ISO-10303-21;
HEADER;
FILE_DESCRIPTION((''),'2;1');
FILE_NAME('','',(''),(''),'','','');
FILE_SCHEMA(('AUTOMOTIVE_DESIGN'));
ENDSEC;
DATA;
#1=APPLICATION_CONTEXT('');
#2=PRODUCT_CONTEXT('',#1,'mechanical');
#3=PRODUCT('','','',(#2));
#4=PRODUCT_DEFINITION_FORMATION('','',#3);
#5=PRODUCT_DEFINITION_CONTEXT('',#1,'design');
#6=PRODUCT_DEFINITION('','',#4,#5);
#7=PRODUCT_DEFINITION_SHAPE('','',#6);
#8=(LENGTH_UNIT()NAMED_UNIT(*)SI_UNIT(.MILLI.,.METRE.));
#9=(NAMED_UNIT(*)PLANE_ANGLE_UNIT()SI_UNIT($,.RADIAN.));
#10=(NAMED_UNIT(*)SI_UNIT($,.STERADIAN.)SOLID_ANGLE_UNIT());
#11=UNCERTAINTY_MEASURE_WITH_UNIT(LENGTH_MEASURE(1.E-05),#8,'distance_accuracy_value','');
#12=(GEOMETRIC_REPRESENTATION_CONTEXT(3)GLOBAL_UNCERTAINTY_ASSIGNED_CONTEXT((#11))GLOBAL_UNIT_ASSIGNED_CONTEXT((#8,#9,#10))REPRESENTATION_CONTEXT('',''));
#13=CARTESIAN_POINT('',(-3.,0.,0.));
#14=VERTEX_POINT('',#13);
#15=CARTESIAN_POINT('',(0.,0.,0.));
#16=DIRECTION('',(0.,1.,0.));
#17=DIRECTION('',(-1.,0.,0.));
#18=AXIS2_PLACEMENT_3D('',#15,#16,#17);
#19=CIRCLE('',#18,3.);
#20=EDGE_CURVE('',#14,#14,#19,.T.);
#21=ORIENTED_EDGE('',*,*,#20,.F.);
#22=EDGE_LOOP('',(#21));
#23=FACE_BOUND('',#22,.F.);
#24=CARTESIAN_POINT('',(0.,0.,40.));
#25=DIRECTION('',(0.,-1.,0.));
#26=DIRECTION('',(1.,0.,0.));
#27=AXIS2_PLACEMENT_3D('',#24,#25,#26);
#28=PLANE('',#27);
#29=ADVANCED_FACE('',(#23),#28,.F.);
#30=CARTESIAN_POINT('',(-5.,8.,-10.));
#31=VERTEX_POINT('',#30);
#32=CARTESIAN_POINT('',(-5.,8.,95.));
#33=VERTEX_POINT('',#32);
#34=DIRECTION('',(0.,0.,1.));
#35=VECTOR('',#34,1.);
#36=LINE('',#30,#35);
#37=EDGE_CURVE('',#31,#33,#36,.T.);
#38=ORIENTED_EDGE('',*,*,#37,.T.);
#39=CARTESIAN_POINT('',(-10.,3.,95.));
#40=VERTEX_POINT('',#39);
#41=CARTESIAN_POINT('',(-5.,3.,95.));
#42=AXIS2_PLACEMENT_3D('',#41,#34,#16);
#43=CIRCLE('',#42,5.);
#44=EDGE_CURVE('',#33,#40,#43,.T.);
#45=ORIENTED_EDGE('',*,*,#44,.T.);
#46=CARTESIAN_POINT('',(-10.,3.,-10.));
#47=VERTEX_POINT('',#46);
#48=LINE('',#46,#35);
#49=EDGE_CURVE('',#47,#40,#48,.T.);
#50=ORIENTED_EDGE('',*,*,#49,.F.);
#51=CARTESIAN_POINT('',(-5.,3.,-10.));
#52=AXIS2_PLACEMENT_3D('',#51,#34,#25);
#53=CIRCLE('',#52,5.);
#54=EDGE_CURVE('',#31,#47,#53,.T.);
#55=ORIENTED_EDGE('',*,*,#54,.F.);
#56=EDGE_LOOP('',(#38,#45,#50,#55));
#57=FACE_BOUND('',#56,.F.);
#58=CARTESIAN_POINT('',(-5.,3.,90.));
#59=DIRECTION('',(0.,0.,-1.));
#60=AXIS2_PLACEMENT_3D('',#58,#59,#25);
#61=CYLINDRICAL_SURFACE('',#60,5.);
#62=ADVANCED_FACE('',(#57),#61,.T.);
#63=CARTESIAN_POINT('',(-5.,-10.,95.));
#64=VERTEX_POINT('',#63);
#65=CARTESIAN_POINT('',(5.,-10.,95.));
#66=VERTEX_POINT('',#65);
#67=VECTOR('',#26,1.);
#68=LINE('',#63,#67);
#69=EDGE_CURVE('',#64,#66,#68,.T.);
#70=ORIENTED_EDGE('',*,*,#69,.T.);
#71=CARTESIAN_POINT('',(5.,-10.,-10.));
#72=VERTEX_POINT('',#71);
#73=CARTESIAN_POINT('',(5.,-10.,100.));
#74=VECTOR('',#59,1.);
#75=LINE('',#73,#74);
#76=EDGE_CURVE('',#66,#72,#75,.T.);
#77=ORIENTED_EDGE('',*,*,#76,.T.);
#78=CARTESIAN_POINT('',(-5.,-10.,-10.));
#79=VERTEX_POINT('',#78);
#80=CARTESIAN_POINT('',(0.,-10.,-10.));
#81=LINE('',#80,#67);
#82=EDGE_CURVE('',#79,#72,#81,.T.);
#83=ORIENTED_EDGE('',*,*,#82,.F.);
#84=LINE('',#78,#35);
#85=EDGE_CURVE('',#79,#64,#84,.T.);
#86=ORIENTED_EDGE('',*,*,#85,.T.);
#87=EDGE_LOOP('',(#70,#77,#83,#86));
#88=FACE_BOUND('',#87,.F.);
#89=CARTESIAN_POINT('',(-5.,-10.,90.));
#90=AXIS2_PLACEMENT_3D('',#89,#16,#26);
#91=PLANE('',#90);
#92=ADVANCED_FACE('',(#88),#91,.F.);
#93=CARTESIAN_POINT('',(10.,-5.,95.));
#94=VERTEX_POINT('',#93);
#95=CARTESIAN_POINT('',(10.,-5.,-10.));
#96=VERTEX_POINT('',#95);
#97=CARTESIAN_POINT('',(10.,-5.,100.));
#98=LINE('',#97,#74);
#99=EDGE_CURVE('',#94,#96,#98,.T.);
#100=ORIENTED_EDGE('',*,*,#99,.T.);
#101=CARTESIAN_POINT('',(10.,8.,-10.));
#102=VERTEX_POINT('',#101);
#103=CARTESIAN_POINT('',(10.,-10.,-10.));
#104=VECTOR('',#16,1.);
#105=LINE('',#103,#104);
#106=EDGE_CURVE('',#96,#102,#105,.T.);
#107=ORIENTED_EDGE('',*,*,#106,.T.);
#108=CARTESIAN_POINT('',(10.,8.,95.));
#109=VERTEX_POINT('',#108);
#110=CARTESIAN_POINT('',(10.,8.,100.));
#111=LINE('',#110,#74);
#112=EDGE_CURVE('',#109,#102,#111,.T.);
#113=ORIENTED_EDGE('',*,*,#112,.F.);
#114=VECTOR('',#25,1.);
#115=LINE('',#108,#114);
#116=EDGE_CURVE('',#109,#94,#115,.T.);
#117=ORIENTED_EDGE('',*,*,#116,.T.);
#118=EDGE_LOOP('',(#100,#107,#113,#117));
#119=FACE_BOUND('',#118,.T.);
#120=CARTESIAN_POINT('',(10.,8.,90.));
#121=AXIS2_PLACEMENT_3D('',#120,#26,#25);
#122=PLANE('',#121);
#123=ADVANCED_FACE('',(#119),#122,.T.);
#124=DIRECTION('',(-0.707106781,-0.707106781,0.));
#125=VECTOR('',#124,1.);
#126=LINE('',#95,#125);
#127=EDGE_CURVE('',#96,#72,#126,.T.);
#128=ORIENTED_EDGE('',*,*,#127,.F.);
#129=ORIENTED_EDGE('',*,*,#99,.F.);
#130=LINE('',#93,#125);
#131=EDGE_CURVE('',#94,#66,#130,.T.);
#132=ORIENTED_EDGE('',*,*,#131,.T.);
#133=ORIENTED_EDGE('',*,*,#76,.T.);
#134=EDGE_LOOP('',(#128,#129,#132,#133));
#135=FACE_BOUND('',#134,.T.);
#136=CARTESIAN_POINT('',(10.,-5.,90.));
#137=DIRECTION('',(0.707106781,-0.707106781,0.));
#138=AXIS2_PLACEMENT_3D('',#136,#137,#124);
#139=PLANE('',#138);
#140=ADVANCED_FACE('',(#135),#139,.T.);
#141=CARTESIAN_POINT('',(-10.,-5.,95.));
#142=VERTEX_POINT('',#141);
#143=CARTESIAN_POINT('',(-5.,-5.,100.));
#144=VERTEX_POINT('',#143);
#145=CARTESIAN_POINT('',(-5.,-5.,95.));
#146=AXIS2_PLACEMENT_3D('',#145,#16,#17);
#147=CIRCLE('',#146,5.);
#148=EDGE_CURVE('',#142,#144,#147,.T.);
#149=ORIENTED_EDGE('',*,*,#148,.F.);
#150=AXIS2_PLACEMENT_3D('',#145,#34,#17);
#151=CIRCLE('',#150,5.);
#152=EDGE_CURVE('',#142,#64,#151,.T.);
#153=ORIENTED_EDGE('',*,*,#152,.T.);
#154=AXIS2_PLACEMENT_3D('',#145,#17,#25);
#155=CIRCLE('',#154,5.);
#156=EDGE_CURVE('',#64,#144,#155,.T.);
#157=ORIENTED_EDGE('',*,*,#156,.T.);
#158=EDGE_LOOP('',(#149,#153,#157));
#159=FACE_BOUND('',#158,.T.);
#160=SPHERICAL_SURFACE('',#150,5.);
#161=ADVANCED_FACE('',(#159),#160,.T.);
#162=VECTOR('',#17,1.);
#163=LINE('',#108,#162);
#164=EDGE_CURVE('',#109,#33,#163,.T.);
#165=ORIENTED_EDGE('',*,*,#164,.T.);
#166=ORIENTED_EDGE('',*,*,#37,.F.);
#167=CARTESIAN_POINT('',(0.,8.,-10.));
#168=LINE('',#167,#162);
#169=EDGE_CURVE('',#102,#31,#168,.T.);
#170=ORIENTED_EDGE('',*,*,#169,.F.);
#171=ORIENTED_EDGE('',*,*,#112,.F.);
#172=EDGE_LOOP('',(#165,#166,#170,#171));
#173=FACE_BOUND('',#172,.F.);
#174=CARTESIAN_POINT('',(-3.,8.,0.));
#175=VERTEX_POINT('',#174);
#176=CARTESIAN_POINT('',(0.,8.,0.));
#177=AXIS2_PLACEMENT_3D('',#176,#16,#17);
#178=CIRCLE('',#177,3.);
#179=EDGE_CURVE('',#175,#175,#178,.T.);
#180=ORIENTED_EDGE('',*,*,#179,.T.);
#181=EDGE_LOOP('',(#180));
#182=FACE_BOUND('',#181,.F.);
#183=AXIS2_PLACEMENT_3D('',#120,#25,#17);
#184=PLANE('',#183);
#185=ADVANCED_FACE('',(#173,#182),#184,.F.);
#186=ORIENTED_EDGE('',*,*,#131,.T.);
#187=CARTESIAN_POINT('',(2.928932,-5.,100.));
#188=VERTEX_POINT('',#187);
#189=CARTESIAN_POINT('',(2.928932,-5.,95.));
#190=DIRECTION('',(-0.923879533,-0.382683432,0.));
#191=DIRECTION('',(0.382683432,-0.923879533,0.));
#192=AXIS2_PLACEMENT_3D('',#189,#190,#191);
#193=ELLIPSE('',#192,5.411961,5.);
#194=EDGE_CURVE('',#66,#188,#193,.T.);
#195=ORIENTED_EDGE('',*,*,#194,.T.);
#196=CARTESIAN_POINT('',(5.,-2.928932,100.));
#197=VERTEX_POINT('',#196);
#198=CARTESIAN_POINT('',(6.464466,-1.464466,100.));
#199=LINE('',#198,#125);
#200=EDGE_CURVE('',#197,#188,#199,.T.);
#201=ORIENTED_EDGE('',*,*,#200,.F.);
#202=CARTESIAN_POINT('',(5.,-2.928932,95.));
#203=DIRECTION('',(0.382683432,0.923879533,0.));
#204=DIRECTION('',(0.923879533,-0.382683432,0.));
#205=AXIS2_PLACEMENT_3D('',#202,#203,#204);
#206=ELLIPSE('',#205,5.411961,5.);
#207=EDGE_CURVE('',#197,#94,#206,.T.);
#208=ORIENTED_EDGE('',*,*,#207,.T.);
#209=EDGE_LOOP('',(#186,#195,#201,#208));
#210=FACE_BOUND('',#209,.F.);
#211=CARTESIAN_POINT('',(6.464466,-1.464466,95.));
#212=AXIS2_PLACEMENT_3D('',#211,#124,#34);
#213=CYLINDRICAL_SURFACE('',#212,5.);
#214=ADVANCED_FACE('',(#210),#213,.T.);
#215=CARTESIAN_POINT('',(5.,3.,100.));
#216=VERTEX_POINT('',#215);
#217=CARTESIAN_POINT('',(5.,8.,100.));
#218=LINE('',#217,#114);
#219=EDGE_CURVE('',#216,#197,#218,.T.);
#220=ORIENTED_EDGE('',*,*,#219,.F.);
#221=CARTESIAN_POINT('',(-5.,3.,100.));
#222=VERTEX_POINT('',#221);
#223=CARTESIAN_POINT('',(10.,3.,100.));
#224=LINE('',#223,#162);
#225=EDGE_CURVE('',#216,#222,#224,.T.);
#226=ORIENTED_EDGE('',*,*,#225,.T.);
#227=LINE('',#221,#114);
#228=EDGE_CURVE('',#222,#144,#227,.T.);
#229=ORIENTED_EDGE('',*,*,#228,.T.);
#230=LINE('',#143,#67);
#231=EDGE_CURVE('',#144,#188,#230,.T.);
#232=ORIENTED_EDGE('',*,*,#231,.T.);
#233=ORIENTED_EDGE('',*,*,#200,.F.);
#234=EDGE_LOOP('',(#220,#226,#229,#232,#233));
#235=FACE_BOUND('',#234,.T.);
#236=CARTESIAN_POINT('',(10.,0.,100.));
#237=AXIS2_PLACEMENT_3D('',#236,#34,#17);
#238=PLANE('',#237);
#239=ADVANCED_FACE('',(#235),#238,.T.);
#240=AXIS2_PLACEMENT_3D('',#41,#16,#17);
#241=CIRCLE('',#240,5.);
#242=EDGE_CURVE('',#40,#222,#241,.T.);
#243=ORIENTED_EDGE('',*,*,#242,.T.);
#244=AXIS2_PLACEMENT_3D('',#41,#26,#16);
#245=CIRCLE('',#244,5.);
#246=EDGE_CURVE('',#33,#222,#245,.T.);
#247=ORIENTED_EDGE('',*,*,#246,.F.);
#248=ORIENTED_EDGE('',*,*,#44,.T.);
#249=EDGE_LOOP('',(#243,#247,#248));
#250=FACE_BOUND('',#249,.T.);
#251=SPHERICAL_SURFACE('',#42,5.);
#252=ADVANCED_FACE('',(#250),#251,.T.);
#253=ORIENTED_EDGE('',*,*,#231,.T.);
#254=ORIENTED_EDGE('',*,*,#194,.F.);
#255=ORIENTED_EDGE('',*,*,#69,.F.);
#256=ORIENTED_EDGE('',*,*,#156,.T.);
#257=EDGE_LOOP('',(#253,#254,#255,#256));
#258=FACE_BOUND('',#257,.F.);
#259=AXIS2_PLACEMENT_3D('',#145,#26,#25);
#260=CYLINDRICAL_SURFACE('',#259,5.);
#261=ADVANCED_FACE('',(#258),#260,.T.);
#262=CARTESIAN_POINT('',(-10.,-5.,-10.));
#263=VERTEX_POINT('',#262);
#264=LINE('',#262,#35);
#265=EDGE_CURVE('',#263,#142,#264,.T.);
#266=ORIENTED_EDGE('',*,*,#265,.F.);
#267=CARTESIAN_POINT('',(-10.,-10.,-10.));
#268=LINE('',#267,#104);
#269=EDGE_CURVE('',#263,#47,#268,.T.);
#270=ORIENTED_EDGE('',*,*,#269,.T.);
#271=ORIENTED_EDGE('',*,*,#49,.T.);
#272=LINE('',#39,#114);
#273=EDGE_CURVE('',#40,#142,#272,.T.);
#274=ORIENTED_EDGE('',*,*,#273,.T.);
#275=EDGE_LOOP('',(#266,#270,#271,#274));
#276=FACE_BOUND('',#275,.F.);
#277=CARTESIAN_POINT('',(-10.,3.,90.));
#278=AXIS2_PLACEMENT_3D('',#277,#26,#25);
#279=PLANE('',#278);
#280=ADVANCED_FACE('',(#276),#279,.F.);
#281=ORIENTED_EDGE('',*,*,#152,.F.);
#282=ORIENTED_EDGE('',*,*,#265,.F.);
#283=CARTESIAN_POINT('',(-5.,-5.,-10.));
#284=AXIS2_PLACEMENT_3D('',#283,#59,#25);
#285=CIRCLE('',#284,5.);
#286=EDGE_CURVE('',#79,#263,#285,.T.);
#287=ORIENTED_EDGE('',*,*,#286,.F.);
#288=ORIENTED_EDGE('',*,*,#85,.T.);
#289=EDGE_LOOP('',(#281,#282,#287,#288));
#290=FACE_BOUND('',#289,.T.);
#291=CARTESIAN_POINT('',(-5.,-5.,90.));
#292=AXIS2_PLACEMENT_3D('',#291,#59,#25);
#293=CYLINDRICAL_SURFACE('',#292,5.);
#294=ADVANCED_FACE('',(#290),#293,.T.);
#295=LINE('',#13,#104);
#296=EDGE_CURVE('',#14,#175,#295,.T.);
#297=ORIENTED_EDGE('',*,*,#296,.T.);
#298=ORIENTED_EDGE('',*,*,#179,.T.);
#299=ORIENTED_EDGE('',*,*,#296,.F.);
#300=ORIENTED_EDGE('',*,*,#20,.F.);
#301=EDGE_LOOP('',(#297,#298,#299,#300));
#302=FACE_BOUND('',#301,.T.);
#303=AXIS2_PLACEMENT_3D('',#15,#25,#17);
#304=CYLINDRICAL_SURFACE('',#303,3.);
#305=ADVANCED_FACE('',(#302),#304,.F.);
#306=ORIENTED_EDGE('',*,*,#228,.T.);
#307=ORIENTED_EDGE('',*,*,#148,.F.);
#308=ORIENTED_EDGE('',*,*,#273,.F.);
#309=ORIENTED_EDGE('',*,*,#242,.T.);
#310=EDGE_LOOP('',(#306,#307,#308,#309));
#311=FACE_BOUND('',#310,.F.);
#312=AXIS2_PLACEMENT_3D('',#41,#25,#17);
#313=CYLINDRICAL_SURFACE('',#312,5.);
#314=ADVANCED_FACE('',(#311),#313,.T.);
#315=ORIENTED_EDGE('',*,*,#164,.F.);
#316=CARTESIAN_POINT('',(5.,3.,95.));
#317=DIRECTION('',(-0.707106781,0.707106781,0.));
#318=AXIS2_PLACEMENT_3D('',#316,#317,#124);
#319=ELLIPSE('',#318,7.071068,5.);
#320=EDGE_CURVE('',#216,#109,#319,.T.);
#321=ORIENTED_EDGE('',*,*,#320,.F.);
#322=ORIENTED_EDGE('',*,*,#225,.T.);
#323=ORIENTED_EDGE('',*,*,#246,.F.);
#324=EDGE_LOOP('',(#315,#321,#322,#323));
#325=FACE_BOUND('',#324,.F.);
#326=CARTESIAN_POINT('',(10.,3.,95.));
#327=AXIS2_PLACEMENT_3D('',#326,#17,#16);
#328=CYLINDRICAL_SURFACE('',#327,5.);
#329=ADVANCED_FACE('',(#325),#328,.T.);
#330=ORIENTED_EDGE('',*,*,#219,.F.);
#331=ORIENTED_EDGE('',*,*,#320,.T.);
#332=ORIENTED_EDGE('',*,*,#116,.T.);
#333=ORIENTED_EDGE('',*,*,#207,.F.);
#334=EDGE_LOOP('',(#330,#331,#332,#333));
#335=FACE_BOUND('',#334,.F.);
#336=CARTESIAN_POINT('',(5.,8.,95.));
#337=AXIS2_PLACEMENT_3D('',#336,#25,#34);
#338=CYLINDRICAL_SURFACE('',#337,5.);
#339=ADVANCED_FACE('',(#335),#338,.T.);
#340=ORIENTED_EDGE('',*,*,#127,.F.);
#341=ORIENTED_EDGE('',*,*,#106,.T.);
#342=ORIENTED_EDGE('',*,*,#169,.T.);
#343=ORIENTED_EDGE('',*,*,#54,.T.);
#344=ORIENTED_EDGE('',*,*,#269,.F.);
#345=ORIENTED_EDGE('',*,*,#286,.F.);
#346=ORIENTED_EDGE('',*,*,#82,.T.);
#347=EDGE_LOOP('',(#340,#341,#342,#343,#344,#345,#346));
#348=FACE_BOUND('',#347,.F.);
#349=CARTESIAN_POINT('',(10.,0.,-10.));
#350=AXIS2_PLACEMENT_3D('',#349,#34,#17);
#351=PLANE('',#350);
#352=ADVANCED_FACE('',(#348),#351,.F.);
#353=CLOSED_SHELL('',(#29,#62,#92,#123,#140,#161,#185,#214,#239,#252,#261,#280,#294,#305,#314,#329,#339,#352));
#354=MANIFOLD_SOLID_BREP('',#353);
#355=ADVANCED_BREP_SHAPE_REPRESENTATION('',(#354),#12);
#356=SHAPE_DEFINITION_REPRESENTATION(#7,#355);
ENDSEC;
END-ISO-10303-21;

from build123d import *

# Parameters (mm, degrees)
F0_W     = 20
F0_H     = 100
F1_DEPTH = 10
F2_W     = 20
F2_H     = 100
F2_R     = 3
F3_DEPTH = 8
F4_SIZE  = 5
F5_R     = 5
F6_DEPTH = 10
F7_R     = 5


with BuildPart() as f1:
    # F0 (on Front) → F1 (new body)
    with BuildSketch(Plane.XZ):
        with Locations((0, 40)):
            Rectangle(F0_W, F0_H)
    extrude(amount=F1_DEPTH)

    # F2 (on face) → F3 (join)
    with BuildSketch(Plane(origin=(0, 0, 0), x_dir=(-1, 0, 0), z_dir=(0, 1, 0))):
        with Locations((0, 40)):
            Rectangle(F2_W, F2_H)
        Circle(F2_R, mode=Mode.SUBTRACT)
    extrude(amount=F3_DEPTH)

    # F4
    f4_edges = [f1.edges().sort_by_distance(p)[0] for p in [
        (10, -10, 40),
    ]]
    chamfer(f4_edges, length=F4_SIZE)

    # F5
    f5_edges = [f1.edges().sort_by_distance(p)[0] for p in [
        (-10, -10, 40),
        (-10, 8, 40),
    ]]
    fillet(f5_edges, radius=F5_R)

    # F6 (add): a face of the model
    f6_faces = [f1.faces().sort_by_distance(p)[0] for p in [
        (-0.0262777066, -0.7278062427, 90),
    ]]
    extrude(f6_faces, amount=F6_DEPTH)

    # F7
    f7_edges = [f1.edges().sort_by_distance(p)[0] for p in [
        (10, 1.5, 100),
        (2.5, 8, 100),
        (-10, -1, 100),
        (7.5, -7.5, 100),
        (-8.535534, -8.535534, 100),
        (0, -10, 100),
        (-8.535534, 6.535534, 100),
    ]]
    fillet(f7_edges, radius=F7_R)


solid = f1.part
